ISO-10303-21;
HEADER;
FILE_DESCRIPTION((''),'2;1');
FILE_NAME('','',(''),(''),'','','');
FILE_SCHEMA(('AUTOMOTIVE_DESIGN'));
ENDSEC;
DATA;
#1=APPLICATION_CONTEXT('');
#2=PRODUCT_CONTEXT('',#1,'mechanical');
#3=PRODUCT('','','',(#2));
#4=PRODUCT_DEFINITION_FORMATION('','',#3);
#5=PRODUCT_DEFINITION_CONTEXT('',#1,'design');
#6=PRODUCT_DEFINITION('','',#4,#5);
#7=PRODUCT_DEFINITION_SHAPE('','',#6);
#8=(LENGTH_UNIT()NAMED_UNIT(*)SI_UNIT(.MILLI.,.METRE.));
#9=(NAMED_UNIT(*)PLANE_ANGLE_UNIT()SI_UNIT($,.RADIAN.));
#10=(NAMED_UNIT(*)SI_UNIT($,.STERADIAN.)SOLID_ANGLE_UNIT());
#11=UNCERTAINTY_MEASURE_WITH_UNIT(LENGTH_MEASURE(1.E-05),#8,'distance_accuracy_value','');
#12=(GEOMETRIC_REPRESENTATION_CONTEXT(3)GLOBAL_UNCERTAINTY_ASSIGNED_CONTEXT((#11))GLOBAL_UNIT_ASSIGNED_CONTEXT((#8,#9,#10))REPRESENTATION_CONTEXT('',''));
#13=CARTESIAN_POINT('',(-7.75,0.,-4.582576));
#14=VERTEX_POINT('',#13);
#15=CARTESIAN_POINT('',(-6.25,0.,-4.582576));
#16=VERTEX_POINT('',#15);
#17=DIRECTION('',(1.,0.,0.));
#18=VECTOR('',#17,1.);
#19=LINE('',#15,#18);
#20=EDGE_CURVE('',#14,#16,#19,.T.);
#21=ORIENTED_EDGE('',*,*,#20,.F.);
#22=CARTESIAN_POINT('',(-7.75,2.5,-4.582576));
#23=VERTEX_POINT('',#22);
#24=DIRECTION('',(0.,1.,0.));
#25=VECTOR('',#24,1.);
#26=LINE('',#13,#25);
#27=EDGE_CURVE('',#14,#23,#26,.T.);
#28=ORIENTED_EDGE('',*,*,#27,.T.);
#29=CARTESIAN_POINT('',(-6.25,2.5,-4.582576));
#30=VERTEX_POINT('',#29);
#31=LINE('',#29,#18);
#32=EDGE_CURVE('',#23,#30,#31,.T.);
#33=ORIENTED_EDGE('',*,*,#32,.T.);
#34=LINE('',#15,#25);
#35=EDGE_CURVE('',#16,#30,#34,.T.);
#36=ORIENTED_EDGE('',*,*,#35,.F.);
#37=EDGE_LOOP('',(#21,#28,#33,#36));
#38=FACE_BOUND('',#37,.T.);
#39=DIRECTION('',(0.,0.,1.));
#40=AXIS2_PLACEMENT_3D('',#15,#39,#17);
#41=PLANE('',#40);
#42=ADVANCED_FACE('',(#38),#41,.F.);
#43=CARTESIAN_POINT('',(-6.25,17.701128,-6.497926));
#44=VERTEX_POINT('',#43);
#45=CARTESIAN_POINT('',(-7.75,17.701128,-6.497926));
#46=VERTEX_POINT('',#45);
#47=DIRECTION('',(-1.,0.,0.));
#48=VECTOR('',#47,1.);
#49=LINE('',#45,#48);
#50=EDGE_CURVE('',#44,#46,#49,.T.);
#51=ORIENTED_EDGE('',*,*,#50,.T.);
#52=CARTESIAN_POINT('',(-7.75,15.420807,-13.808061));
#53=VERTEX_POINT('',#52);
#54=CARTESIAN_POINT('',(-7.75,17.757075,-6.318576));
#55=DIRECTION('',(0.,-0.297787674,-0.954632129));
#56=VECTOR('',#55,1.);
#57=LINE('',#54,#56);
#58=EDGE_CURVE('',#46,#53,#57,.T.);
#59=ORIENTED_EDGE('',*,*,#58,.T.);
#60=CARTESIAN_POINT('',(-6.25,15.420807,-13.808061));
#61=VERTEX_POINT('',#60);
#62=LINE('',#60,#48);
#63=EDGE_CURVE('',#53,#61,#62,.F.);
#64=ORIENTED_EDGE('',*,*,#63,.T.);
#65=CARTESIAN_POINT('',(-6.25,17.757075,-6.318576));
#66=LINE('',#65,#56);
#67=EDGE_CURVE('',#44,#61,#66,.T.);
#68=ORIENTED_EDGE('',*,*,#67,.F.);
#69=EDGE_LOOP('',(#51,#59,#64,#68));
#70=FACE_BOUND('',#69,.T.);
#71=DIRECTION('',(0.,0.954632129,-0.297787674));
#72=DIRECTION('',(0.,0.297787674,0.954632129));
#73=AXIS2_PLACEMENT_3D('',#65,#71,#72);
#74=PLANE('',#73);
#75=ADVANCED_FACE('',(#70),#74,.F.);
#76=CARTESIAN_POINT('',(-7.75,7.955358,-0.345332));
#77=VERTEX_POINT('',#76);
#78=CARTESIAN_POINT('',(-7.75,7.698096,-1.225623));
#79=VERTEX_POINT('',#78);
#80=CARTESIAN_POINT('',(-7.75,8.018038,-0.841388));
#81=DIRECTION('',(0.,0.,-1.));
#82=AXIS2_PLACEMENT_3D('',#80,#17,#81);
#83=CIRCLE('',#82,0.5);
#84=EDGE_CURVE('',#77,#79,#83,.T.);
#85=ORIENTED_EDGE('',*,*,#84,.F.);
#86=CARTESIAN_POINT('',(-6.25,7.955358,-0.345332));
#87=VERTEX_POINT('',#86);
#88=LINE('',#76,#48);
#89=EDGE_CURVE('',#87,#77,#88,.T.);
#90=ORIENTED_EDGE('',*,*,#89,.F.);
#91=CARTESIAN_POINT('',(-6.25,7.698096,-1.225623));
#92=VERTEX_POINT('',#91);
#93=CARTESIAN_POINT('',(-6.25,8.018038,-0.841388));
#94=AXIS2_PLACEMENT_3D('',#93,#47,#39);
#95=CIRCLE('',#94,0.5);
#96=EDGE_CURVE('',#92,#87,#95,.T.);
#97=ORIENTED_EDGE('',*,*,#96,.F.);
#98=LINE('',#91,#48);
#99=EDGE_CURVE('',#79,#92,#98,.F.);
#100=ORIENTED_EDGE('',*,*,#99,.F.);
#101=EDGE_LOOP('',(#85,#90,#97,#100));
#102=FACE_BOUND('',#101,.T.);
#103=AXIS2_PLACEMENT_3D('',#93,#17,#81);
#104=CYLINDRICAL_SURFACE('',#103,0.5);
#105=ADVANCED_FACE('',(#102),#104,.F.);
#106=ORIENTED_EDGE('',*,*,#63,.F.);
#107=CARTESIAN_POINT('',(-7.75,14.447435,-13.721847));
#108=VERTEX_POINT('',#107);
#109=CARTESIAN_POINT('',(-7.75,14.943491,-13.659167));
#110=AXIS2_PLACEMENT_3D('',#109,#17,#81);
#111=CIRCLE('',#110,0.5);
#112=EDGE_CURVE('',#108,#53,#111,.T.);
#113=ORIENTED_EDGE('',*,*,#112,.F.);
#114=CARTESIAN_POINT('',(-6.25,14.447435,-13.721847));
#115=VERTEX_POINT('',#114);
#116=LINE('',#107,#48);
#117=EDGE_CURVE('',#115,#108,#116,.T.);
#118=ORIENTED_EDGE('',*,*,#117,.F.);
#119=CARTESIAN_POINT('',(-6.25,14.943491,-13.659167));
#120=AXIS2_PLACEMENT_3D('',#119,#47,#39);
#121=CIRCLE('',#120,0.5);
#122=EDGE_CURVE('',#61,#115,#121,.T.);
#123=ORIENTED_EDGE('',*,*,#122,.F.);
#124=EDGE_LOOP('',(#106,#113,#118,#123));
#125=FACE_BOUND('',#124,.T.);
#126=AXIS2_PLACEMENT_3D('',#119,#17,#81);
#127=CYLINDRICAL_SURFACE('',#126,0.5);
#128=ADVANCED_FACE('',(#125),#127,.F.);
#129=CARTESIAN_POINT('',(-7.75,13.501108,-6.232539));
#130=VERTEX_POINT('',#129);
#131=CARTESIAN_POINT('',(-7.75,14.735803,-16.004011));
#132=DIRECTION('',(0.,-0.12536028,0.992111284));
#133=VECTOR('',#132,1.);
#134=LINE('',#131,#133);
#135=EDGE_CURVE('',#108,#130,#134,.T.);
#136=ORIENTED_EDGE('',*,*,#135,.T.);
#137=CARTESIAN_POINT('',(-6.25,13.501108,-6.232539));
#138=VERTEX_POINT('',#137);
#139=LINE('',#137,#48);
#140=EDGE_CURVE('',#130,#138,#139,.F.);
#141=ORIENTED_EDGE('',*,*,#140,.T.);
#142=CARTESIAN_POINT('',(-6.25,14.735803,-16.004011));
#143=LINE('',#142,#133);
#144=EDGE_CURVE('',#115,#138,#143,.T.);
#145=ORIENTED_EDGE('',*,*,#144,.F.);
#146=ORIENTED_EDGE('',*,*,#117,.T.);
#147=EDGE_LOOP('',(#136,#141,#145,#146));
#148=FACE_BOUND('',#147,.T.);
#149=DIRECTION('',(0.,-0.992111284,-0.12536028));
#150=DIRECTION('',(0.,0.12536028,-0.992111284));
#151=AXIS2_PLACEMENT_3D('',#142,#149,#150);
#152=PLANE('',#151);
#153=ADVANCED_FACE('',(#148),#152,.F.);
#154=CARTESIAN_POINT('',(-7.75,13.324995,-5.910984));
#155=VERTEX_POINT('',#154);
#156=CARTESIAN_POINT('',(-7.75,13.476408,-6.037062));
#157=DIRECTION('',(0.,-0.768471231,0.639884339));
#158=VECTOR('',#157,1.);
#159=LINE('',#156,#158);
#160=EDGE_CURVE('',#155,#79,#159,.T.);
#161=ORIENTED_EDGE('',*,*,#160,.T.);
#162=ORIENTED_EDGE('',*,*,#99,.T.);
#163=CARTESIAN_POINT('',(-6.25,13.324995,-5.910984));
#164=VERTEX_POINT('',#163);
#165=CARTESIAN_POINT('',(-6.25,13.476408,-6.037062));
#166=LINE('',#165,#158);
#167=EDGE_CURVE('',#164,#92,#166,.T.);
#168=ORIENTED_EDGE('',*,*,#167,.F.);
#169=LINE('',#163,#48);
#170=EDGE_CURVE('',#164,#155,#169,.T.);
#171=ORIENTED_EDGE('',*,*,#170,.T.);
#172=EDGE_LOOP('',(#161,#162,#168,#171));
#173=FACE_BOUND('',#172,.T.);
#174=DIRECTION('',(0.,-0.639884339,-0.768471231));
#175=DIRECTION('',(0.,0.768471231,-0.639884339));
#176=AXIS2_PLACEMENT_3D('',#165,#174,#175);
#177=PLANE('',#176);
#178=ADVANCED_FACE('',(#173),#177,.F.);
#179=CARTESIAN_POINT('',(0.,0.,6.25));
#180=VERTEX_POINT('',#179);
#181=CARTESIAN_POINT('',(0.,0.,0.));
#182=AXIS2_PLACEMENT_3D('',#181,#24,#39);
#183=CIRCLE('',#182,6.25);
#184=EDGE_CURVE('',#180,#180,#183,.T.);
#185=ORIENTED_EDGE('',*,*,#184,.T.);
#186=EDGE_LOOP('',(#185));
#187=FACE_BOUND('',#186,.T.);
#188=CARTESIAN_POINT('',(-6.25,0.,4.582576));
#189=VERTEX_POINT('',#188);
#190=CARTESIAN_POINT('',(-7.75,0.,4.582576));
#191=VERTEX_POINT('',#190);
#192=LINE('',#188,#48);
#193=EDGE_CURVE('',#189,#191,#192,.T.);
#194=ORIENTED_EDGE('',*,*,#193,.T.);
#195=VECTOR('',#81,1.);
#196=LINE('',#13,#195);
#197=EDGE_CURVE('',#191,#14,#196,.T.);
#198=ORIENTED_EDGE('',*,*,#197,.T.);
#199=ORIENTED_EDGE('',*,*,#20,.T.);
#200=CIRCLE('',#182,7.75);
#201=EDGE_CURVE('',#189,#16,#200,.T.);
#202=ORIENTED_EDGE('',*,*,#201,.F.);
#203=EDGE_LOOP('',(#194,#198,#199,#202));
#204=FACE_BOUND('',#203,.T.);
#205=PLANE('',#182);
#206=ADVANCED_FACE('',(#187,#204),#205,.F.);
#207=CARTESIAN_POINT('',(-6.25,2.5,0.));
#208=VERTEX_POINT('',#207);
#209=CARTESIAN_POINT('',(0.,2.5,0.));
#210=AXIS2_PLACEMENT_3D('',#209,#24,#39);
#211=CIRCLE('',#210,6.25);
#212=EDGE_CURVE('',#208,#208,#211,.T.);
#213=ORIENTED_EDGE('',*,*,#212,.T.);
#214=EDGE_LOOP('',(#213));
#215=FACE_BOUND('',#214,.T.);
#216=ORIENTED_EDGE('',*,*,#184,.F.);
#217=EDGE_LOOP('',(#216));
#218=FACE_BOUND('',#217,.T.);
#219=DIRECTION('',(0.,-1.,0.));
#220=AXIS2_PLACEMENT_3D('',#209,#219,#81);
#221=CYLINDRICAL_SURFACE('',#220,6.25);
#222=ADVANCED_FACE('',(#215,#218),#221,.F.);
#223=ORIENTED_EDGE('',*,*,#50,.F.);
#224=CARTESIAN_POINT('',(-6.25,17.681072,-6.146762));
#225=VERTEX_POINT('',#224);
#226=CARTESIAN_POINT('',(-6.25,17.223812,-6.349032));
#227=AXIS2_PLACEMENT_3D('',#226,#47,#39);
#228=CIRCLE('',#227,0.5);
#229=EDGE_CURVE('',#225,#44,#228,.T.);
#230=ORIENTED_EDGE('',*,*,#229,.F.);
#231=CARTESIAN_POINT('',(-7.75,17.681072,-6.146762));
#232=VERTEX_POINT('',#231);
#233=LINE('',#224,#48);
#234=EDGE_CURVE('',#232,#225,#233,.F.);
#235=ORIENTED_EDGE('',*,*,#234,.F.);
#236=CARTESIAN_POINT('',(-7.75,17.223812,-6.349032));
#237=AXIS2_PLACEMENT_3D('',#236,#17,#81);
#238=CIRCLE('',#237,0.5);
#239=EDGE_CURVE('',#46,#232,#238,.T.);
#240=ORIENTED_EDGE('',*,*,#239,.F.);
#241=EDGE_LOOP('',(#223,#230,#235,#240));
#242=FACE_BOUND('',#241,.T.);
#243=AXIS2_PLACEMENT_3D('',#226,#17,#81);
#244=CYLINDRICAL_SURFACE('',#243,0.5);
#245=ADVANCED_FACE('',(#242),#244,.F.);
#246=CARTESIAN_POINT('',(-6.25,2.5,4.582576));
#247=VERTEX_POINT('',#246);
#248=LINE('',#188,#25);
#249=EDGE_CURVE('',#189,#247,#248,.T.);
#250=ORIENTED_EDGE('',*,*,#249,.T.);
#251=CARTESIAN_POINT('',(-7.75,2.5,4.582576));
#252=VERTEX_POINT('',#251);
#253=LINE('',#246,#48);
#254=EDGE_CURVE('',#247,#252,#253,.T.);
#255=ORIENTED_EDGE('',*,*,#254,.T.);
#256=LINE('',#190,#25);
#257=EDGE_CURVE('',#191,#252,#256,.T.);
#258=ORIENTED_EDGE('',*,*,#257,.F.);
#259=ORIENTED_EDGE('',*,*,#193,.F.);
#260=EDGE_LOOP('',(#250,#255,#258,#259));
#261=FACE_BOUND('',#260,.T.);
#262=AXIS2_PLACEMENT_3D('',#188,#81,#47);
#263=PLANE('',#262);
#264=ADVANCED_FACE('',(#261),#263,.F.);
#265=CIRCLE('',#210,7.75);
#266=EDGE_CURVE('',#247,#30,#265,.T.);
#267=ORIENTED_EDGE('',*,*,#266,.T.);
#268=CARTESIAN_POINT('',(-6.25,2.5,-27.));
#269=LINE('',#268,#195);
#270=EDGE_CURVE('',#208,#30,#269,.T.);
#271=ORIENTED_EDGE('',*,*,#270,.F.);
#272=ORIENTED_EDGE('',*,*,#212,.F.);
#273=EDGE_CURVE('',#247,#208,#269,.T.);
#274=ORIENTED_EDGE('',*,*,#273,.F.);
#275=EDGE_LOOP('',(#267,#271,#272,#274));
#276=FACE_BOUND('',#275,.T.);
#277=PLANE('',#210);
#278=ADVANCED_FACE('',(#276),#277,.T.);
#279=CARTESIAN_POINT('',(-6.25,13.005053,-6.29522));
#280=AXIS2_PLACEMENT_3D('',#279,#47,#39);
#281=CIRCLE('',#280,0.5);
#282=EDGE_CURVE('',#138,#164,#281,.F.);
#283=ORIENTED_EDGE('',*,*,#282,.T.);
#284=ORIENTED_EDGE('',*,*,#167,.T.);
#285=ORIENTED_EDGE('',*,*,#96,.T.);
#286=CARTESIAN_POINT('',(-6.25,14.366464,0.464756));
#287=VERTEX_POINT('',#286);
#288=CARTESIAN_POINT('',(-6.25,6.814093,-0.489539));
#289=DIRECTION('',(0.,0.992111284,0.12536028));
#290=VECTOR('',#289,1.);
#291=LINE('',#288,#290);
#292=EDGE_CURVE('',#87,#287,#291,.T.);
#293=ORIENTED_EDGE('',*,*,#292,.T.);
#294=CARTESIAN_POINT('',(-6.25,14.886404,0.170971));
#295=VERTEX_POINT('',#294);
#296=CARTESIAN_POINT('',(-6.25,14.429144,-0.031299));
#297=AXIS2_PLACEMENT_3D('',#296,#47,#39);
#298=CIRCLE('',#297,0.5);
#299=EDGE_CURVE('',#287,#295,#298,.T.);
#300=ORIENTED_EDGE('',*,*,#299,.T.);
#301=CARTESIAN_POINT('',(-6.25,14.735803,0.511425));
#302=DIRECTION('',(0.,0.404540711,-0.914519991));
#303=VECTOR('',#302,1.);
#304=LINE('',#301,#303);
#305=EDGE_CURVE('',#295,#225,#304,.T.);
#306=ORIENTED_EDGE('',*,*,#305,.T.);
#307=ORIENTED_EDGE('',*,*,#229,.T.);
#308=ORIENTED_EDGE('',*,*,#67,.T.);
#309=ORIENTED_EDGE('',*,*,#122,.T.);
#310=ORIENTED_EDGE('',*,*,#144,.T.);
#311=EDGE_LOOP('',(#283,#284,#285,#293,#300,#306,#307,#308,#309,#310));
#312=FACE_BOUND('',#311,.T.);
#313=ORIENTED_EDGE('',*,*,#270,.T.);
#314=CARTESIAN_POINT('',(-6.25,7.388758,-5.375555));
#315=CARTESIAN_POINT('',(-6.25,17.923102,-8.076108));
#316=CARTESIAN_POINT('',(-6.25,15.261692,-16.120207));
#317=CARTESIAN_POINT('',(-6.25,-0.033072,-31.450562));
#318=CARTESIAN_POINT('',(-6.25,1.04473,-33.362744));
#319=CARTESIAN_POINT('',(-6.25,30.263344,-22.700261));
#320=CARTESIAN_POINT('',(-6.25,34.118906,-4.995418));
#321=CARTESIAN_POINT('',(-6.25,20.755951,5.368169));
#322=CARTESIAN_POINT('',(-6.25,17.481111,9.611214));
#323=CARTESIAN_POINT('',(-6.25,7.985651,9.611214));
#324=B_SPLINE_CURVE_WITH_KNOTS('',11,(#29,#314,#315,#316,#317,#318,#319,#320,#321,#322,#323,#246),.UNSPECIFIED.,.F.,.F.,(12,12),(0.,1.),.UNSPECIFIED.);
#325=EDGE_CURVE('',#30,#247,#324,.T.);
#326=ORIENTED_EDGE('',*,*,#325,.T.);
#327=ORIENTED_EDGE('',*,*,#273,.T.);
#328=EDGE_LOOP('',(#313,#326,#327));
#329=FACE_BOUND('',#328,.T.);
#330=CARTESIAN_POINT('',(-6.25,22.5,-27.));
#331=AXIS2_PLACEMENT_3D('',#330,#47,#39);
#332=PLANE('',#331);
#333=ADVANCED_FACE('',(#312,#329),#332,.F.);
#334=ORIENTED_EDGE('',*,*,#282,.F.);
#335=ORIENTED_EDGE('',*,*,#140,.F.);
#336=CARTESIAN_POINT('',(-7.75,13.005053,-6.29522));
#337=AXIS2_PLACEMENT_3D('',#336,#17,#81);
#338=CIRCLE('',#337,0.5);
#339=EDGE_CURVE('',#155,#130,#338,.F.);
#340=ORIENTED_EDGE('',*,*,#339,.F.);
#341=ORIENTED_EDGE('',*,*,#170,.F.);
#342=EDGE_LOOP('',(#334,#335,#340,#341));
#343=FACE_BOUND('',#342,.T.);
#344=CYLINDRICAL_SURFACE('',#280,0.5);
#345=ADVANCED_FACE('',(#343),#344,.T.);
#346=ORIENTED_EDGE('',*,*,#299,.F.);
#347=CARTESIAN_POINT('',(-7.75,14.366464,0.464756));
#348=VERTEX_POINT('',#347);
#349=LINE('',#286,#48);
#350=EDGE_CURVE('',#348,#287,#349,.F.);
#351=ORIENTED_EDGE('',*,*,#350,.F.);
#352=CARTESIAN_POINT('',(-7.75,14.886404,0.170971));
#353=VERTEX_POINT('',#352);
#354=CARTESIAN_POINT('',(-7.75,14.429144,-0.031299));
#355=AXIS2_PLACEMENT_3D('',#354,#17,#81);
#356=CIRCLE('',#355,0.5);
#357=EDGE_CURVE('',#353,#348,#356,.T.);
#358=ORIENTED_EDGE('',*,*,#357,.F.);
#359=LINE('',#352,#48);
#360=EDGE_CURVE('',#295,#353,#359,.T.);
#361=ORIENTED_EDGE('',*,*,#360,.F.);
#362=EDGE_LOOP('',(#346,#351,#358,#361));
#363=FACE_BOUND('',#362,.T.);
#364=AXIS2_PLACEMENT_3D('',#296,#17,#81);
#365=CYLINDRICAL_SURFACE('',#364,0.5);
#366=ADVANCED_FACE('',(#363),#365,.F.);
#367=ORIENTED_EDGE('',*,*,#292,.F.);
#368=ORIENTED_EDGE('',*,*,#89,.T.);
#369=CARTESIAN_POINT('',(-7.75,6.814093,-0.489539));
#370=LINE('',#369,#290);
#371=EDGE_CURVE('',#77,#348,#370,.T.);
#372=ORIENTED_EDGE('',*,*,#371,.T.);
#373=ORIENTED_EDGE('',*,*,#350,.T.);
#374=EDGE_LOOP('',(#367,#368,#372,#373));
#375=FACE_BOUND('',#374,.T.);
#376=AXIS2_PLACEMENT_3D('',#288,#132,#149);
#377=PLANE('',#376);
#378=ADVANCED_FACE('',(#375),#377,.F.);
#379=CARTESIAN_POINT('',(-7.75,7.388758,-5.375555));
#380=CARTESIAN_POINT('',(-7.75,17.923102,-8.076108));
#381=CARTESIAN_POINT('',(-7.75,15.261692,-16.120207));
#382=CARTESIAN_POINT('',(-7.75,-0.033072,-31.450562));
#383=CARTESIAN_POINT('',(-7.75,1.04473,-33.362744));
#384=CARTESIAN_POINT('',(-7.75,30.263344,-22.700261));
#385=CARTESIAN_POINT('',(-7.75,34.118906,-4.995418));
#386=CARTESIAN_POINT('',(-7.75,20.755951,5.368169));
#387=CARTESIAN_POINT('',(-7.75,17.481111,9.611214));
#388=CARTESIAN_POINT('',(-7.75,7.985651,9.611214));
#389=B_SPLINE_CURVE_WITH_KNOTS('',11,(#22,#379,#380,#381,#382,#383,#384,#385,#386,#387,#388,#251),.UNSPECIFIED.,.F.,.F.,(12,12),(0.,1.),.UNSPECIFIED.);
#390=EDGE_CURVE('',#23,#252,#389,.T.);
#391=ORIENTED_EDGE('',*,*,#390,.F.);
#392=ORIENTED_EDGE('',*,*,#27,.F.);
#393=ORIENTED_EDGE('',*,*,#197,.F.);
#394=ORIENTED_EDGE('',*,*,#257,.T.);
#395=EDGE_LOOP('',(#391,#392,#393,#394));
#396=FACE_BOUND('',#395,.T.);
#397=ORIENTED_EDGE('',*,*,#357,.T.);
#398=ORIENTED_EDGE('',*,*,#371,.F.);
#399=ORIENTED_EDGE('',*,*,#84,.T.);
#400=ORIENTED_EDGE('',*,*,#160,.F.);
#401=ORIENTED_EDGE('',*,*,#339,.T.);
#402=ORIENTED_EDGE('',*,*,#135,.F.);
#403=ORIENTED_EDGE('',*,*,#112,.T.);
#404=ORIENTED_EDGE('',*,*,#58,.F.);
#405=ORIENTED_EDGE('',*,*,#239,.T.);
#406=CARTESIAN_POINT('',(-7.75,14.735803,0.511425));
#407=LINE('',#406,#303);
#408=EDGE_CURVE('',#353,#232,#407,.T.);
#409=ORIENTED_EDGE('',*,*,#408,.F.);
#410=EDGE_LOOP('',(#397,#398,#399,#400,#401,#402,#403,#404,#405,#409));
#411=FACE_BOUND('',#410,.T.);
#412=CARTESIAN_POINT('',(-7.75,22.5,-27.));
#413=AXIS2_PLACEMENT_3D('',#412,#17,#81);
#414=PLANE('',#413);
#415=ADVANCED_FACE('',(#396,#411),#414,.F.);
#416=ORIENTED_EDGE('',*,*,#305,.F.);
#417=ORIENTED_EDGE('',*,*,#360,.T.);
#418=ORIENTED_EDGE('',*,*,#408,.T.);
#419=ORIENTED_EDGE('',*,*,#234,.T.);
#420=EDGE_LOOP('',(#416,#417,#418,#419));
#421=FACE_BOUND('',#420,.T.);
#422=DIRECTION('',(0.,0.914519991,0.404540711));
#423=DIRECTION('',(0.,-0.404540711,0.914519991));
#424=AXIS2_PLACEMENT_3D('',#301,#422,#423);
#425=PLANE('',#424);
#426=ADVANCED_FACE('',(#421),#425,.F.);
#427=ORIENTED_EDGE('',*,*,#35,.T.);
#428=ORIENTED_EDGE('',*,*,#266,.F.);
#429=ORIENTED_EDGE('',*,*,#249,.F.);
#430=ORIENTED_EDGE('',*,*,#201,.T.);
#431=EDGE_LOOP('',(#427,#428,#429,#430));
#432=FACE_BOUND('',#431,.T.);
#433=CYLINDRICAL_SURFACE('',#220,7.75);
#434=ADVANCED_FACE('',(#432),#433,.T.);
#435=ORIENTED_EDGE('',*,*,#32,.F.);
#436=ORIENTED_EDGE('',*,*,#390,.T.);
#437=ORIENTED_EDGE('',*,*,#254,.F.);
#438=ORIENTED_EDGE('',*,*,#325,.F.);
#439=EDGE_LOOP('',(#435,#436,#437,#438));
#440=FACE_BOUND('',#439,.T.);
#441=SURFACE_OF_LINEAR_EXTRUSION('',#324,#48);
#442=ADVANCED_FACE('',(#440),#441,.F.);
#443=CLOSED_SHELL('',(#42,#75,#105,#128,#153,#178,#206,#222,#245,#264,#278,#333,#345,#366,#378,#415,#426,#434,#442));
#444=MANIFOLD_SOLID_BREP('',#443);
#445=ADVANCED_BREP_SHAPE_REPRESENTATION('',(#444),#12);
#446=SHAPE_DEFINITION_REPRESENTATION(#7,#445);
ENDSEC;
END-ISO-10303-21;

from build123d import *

# Parameters (mm, degrees)
SKETCH1_R           = 7.75
SKETCH1_R_2         = 6.25
BOSS_EXTRUDE1_DEPTH = 2.5
SKETCH2_W           = 1.5
SKETCH2_H           = 37
BOSS_EXTRUDE3_DEPTH = 20
SKETCH3_W           = 1.5
SKETCH3_H           = 9.16515139
BOSS_EXTRUDE4_DEPTH = 2.5
CUT_EXTRUDE1_START  = -1.5
CUT_EXTRUDE1_DEPTH  = 1.5
CUT_EXTRUDE2_DEPTH  = 1.5
FILLET1_R           = 0.5


# Read off the part's stored shape, not the designer's step: Cut-Extrude1
with BuildPart() as part:
    # Sketch1 → Boss-Extrude1 (new body)
    with BuildSketch(Plane(origin=(0, 0, 0), x_dir=(1, 0, 0), z_dir=(0, 1, 0))):
        with Locations(Location((0, 0, 0), (0, 0, 270))):
            Circle(SKETCH1_R)
        with Locations(Location((0, 0, 0), (0, 0, 270))):
            Circle(SKETCH1_R_2, mode=Mode.SUBTRACT)
    extrude(amount=BOSS_EXTRUDE1_DEPTH)

    # Sketch2 → Boss-Extrude3 (add)
    with BuildSketch(Plane(origin=(0, 2.5, 0), x_dir=(1, 0, 0), z_dir=(0, 1, 0))):
        with Locations((-7, 8.5)):
            Rectangle(SKETCH2_W, SKETCH2_H)
    extrude(amount=BOSS_EXTRUDE3_DEPTH)

    # Sketch3 → Boss-Extrude4 (add)
    with BuildSketch(Plane.XZ.offset(-2.5)):
        with Locations((-7, 0)):
            Rectangle(SKETCH3_W, SKETCH3_H)
    extrude(amount=BOSS_EXTRUDE4_DEPTH)

    # Cut-Extrude1 outline → Cut-Extrude1 (cut)
    with BuildSketch(Plane.ZY.offset(7.75).offset(CUT_EXTRUDE1_START)):
        with BuildLine():
            Line((-27, 2.5), (-4.582575695, 2.5))
            add(Edge.make_bspline(
                [(-4.582575695, 2.5), (-5.37555514, 7.388757929), (-8.076108426, 17.923102082), (-16.12020713, 15.261692376), (-31.450561972, -0.033072299), (-33.362744113, 1.044730307), (-22.700260878, 30.26334356), (-4.995418111, 34.118905882), (5.368168563, 20.755950952), (9.611214468, 17.48111109), (9.611214468, 7.985651231), (4.582575695, 2.5)],
                knots=[0, 0, 0, 0, 0, 0, 0, 0, 0, 0, 0, 0, 1, 1, 1, 1, 1, 1, 1, 1, 1, 1, 1, 1], degree=11))
            Line((4.582575695, 2.5), (10, 2.5))
            Line((10, 2.5), (10, 22.5))
            Line((10, 22.5), (-27, 22.5))
            Line((-27, 22.5), (-27, 2.5))
        make_face()
    extrude(amount=CUT_EXTRUDE1_DEPTH, mode=Mode.SUBTRACT)

    # Sketch5 → Cut-Extrude2 (cut)
    with BuildSketch(Plane.ZY.offset(7.75)):
        Polygon((-16.004011086, 14.735802895), (-6.037061634, 13.476408314), (-0.489539097, 6.814092623), (0.511425043, 14.735802895), (-6.318576051, 17.757074741), align=None)
    extrude(amount=-CUT_EXTRUDE2_DEPTH, mode=Mode.SUBTRACT)

    # Fillet1
    fillet1_edges = [part.edges().sort_by_distance(p)[0] for p in [
        (-7, 14.735802895, -16.004011086),
        (-7, 17.757074741, -6.318576051),
        (-7, 14.735802895, 0.511425043),
        (-7, 6.814092623, -0.489539097),
        (-7, 13.476408314, -6.037061634),
    ]]
    fillet(fillet1_edges, radius=FILLET1_R)


solid = part.part
